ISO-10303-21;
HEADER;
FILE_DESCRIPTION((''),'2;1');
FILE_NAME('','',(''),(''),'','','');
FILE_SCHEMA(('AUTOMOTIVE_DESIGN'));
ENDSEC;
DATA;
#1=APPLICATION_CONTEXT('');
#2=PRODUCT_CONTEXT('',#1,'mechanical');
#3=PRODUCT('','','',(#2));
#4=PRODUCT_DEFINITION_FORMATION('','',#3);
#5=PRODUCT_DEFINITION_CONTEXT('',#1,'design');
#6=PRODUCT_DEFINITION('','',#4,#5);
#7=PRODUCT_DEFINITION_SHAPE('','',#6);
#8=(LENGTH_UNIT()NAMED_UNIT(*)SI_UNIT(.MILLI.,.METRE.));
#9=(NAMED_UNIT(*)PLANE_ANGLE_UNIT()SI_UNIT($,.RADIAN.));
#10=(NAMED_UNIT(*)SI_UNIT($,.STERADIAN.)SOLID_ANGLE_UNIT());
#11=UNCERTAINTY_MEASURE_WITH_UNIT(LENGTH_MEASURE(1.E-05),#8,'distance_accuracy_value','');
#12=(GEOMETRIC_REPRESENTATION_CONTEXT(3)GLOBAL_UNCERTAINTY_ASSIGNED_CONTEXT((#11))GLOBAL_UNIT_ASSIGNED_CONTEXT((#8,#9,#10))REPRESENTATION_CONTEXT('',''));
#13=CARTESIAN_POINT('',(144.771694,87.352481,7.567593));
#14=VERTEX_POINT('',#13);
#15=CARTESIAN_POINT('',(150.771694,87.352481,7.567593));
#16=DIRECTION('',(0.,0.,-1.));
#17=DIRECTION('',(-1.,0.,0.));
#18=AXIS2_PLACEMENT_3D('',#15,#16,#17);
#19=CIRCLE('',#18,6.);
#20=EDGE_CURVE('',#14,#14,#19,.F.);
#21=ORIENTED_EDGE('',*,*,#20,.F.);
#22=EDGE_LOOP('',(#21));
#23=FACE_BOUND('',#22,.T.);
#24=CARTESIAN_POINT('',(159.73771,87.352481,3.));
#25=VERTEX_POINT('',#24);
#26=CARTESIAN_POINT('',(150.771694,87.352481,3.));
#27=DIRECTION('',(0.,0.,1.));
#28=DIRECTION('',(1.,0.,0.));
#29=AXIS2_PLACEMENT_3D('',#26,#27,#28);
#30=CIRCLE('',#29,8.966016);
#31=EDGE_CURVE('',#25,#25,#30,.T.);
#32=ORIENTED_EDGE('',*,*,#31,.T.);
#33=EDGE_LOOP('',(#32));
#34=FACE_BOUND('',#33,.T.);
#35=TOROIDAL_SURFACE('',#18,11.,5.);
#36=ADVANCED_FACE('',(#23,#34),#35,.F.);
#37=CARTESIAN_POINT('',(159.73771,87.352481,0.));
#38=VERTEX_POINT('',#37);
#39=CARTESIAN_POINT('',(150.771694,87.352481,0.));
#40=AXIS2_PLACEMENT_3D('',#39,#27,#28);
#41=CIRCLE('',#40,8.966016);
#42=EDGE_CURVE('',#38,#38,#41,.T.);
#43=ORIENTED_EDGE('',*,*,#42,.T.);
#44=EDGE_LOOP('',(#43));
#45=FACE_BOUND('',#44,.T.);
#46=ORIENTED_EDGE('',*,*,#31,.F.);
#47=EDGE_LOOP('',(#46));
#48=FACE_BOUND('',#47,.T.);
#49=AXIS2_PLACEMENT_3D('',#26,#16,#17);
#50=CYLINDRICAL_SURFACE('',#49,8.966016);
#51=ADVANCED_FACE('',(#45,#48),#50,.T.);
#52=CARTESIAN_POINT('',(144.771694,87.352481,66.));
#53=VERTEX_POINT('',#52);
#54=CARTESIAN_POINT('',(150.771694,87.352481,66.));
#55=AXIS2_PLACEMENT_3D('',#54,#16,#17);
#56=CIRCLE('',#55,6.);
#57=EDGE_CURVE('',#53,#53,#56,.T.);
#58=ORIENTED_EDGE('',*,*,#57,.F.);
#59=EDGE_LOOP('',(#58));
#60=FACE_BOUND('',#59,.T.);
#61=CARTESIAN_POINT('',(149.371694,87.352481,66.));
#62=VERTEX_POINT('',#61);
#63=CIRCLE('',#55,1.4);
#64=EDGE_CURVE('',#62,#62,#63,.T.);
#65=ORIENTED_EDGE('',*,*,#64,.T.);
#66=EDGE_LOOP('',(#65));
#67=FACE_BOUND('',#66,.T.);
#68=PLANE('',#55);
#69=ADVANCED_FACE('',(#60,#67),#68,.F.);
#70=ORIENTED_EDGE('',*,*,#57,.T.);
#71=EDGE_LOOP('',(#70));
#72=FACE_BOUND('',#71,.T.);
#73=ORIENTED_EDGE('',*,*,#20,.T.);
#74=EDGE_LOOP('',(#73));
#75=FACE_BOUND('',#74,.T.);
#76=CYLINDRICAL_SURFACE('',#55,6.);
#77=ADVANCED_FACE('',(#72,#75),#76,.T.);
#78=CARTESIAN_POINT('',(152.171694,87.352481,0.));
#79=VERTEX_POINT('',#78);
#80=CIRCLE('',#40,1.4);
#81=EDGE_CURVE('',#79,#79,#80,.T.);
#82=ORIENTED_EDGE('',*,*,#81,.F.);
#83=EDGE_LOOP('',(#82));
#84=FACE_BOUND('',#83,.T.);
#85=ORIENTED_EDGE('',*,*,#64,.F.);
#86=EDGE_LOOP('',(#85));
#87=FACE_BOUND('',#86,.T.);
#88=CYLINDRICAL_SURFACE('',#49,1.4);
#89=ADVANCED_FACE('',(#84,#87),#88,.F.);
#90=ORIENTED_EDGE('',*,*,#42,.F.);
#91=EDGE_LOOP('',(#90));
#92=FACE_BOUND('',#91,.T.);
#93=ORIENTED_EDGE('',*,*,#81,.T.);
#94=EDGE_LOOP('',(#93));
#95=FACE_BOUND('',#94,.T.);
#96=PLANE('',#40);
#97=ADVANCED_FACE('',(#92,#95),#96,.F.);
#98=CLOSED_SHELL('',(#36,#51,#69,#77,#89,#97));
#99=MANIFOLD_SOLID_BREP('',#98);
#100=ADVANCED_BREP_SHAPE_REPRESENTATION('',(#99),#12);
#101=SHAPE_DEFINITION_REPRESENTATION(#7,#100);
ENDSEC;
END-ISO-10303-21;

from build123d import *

# Parameters (mm, degrees)
SKETCH_1_R      = 8.966016308
SKETCH_1_R_2    = 1.4
EXTRUDE_1_DEPTH = 3
SKETCH_2_R      = 6
SKETCH_2_R_2    = 1.4
EXTRUDE_2_DEPTH = 66
FILLET_1_R      = 5


with BuildPart() as part:
    # Эскиз1 → Бобышка-Вытянуть1 (new body)
    with BuildSketch(Plane.XY):
        with Locations((150.771693647, 87.352480595)):
            Circle(SKETCH_1_R)
        with Locations((150.771693647, 87.352480595)):
            Circle(SKETCH_1_R_2, mode=Mode.SUBTRACT)
    extrude(amount=EXTRUDE_1_DEPTH)

    # Эскиз2 → Бобышка-Вытянуть2 (add)
    with BuildSketch(Plane(origin=(0, 0, 0), x_dir=(-1, 0, 0), z_dir=(0, 0, -1))):
        with Locations((-150.771693647, 87.352480595)):
            Circle(SKETCH_2_R)
        with Locations((-150.771693647, 87.352480595)):
            Circle(SKETCH_2_R_2, mode=Mode.SUBTRACT)
    extrude(amount=-EXTRUDE_2_DEPTH)

    # Скругление1
    # the kernel refuses this fillet: 5 mm, written as the material it adds along each edge
    with BuildSketch(Plane(origin=(150.771693647, 87.352480595, 3), x_dir=(-1, 0, 0), z_dir=(0, -1, 0))) as fillet_1_piece_1:
        with BuildLine():
            CenterArc((11, -4.567593495), FILLET_1_R, 114.00376912, 65.99623088)
            Line((6, -4.567593495), (5.9, -4.567593495))
            Line((5.9, -4.567593495), (5.9, 0))
            Line((5.9, 0), (6, 0.1))
            ThreePointArc((6, 0.1), (7.483008154, 0.1), (8.925336634, 0.09135187))
            Line((8.925336634, 0.09135187), (8.966016308, 0))
        make_face()
    revolve(axis=Axis((150.771693647, 87.352480595, 3), (0, 0, -1)))


solid = part.part
